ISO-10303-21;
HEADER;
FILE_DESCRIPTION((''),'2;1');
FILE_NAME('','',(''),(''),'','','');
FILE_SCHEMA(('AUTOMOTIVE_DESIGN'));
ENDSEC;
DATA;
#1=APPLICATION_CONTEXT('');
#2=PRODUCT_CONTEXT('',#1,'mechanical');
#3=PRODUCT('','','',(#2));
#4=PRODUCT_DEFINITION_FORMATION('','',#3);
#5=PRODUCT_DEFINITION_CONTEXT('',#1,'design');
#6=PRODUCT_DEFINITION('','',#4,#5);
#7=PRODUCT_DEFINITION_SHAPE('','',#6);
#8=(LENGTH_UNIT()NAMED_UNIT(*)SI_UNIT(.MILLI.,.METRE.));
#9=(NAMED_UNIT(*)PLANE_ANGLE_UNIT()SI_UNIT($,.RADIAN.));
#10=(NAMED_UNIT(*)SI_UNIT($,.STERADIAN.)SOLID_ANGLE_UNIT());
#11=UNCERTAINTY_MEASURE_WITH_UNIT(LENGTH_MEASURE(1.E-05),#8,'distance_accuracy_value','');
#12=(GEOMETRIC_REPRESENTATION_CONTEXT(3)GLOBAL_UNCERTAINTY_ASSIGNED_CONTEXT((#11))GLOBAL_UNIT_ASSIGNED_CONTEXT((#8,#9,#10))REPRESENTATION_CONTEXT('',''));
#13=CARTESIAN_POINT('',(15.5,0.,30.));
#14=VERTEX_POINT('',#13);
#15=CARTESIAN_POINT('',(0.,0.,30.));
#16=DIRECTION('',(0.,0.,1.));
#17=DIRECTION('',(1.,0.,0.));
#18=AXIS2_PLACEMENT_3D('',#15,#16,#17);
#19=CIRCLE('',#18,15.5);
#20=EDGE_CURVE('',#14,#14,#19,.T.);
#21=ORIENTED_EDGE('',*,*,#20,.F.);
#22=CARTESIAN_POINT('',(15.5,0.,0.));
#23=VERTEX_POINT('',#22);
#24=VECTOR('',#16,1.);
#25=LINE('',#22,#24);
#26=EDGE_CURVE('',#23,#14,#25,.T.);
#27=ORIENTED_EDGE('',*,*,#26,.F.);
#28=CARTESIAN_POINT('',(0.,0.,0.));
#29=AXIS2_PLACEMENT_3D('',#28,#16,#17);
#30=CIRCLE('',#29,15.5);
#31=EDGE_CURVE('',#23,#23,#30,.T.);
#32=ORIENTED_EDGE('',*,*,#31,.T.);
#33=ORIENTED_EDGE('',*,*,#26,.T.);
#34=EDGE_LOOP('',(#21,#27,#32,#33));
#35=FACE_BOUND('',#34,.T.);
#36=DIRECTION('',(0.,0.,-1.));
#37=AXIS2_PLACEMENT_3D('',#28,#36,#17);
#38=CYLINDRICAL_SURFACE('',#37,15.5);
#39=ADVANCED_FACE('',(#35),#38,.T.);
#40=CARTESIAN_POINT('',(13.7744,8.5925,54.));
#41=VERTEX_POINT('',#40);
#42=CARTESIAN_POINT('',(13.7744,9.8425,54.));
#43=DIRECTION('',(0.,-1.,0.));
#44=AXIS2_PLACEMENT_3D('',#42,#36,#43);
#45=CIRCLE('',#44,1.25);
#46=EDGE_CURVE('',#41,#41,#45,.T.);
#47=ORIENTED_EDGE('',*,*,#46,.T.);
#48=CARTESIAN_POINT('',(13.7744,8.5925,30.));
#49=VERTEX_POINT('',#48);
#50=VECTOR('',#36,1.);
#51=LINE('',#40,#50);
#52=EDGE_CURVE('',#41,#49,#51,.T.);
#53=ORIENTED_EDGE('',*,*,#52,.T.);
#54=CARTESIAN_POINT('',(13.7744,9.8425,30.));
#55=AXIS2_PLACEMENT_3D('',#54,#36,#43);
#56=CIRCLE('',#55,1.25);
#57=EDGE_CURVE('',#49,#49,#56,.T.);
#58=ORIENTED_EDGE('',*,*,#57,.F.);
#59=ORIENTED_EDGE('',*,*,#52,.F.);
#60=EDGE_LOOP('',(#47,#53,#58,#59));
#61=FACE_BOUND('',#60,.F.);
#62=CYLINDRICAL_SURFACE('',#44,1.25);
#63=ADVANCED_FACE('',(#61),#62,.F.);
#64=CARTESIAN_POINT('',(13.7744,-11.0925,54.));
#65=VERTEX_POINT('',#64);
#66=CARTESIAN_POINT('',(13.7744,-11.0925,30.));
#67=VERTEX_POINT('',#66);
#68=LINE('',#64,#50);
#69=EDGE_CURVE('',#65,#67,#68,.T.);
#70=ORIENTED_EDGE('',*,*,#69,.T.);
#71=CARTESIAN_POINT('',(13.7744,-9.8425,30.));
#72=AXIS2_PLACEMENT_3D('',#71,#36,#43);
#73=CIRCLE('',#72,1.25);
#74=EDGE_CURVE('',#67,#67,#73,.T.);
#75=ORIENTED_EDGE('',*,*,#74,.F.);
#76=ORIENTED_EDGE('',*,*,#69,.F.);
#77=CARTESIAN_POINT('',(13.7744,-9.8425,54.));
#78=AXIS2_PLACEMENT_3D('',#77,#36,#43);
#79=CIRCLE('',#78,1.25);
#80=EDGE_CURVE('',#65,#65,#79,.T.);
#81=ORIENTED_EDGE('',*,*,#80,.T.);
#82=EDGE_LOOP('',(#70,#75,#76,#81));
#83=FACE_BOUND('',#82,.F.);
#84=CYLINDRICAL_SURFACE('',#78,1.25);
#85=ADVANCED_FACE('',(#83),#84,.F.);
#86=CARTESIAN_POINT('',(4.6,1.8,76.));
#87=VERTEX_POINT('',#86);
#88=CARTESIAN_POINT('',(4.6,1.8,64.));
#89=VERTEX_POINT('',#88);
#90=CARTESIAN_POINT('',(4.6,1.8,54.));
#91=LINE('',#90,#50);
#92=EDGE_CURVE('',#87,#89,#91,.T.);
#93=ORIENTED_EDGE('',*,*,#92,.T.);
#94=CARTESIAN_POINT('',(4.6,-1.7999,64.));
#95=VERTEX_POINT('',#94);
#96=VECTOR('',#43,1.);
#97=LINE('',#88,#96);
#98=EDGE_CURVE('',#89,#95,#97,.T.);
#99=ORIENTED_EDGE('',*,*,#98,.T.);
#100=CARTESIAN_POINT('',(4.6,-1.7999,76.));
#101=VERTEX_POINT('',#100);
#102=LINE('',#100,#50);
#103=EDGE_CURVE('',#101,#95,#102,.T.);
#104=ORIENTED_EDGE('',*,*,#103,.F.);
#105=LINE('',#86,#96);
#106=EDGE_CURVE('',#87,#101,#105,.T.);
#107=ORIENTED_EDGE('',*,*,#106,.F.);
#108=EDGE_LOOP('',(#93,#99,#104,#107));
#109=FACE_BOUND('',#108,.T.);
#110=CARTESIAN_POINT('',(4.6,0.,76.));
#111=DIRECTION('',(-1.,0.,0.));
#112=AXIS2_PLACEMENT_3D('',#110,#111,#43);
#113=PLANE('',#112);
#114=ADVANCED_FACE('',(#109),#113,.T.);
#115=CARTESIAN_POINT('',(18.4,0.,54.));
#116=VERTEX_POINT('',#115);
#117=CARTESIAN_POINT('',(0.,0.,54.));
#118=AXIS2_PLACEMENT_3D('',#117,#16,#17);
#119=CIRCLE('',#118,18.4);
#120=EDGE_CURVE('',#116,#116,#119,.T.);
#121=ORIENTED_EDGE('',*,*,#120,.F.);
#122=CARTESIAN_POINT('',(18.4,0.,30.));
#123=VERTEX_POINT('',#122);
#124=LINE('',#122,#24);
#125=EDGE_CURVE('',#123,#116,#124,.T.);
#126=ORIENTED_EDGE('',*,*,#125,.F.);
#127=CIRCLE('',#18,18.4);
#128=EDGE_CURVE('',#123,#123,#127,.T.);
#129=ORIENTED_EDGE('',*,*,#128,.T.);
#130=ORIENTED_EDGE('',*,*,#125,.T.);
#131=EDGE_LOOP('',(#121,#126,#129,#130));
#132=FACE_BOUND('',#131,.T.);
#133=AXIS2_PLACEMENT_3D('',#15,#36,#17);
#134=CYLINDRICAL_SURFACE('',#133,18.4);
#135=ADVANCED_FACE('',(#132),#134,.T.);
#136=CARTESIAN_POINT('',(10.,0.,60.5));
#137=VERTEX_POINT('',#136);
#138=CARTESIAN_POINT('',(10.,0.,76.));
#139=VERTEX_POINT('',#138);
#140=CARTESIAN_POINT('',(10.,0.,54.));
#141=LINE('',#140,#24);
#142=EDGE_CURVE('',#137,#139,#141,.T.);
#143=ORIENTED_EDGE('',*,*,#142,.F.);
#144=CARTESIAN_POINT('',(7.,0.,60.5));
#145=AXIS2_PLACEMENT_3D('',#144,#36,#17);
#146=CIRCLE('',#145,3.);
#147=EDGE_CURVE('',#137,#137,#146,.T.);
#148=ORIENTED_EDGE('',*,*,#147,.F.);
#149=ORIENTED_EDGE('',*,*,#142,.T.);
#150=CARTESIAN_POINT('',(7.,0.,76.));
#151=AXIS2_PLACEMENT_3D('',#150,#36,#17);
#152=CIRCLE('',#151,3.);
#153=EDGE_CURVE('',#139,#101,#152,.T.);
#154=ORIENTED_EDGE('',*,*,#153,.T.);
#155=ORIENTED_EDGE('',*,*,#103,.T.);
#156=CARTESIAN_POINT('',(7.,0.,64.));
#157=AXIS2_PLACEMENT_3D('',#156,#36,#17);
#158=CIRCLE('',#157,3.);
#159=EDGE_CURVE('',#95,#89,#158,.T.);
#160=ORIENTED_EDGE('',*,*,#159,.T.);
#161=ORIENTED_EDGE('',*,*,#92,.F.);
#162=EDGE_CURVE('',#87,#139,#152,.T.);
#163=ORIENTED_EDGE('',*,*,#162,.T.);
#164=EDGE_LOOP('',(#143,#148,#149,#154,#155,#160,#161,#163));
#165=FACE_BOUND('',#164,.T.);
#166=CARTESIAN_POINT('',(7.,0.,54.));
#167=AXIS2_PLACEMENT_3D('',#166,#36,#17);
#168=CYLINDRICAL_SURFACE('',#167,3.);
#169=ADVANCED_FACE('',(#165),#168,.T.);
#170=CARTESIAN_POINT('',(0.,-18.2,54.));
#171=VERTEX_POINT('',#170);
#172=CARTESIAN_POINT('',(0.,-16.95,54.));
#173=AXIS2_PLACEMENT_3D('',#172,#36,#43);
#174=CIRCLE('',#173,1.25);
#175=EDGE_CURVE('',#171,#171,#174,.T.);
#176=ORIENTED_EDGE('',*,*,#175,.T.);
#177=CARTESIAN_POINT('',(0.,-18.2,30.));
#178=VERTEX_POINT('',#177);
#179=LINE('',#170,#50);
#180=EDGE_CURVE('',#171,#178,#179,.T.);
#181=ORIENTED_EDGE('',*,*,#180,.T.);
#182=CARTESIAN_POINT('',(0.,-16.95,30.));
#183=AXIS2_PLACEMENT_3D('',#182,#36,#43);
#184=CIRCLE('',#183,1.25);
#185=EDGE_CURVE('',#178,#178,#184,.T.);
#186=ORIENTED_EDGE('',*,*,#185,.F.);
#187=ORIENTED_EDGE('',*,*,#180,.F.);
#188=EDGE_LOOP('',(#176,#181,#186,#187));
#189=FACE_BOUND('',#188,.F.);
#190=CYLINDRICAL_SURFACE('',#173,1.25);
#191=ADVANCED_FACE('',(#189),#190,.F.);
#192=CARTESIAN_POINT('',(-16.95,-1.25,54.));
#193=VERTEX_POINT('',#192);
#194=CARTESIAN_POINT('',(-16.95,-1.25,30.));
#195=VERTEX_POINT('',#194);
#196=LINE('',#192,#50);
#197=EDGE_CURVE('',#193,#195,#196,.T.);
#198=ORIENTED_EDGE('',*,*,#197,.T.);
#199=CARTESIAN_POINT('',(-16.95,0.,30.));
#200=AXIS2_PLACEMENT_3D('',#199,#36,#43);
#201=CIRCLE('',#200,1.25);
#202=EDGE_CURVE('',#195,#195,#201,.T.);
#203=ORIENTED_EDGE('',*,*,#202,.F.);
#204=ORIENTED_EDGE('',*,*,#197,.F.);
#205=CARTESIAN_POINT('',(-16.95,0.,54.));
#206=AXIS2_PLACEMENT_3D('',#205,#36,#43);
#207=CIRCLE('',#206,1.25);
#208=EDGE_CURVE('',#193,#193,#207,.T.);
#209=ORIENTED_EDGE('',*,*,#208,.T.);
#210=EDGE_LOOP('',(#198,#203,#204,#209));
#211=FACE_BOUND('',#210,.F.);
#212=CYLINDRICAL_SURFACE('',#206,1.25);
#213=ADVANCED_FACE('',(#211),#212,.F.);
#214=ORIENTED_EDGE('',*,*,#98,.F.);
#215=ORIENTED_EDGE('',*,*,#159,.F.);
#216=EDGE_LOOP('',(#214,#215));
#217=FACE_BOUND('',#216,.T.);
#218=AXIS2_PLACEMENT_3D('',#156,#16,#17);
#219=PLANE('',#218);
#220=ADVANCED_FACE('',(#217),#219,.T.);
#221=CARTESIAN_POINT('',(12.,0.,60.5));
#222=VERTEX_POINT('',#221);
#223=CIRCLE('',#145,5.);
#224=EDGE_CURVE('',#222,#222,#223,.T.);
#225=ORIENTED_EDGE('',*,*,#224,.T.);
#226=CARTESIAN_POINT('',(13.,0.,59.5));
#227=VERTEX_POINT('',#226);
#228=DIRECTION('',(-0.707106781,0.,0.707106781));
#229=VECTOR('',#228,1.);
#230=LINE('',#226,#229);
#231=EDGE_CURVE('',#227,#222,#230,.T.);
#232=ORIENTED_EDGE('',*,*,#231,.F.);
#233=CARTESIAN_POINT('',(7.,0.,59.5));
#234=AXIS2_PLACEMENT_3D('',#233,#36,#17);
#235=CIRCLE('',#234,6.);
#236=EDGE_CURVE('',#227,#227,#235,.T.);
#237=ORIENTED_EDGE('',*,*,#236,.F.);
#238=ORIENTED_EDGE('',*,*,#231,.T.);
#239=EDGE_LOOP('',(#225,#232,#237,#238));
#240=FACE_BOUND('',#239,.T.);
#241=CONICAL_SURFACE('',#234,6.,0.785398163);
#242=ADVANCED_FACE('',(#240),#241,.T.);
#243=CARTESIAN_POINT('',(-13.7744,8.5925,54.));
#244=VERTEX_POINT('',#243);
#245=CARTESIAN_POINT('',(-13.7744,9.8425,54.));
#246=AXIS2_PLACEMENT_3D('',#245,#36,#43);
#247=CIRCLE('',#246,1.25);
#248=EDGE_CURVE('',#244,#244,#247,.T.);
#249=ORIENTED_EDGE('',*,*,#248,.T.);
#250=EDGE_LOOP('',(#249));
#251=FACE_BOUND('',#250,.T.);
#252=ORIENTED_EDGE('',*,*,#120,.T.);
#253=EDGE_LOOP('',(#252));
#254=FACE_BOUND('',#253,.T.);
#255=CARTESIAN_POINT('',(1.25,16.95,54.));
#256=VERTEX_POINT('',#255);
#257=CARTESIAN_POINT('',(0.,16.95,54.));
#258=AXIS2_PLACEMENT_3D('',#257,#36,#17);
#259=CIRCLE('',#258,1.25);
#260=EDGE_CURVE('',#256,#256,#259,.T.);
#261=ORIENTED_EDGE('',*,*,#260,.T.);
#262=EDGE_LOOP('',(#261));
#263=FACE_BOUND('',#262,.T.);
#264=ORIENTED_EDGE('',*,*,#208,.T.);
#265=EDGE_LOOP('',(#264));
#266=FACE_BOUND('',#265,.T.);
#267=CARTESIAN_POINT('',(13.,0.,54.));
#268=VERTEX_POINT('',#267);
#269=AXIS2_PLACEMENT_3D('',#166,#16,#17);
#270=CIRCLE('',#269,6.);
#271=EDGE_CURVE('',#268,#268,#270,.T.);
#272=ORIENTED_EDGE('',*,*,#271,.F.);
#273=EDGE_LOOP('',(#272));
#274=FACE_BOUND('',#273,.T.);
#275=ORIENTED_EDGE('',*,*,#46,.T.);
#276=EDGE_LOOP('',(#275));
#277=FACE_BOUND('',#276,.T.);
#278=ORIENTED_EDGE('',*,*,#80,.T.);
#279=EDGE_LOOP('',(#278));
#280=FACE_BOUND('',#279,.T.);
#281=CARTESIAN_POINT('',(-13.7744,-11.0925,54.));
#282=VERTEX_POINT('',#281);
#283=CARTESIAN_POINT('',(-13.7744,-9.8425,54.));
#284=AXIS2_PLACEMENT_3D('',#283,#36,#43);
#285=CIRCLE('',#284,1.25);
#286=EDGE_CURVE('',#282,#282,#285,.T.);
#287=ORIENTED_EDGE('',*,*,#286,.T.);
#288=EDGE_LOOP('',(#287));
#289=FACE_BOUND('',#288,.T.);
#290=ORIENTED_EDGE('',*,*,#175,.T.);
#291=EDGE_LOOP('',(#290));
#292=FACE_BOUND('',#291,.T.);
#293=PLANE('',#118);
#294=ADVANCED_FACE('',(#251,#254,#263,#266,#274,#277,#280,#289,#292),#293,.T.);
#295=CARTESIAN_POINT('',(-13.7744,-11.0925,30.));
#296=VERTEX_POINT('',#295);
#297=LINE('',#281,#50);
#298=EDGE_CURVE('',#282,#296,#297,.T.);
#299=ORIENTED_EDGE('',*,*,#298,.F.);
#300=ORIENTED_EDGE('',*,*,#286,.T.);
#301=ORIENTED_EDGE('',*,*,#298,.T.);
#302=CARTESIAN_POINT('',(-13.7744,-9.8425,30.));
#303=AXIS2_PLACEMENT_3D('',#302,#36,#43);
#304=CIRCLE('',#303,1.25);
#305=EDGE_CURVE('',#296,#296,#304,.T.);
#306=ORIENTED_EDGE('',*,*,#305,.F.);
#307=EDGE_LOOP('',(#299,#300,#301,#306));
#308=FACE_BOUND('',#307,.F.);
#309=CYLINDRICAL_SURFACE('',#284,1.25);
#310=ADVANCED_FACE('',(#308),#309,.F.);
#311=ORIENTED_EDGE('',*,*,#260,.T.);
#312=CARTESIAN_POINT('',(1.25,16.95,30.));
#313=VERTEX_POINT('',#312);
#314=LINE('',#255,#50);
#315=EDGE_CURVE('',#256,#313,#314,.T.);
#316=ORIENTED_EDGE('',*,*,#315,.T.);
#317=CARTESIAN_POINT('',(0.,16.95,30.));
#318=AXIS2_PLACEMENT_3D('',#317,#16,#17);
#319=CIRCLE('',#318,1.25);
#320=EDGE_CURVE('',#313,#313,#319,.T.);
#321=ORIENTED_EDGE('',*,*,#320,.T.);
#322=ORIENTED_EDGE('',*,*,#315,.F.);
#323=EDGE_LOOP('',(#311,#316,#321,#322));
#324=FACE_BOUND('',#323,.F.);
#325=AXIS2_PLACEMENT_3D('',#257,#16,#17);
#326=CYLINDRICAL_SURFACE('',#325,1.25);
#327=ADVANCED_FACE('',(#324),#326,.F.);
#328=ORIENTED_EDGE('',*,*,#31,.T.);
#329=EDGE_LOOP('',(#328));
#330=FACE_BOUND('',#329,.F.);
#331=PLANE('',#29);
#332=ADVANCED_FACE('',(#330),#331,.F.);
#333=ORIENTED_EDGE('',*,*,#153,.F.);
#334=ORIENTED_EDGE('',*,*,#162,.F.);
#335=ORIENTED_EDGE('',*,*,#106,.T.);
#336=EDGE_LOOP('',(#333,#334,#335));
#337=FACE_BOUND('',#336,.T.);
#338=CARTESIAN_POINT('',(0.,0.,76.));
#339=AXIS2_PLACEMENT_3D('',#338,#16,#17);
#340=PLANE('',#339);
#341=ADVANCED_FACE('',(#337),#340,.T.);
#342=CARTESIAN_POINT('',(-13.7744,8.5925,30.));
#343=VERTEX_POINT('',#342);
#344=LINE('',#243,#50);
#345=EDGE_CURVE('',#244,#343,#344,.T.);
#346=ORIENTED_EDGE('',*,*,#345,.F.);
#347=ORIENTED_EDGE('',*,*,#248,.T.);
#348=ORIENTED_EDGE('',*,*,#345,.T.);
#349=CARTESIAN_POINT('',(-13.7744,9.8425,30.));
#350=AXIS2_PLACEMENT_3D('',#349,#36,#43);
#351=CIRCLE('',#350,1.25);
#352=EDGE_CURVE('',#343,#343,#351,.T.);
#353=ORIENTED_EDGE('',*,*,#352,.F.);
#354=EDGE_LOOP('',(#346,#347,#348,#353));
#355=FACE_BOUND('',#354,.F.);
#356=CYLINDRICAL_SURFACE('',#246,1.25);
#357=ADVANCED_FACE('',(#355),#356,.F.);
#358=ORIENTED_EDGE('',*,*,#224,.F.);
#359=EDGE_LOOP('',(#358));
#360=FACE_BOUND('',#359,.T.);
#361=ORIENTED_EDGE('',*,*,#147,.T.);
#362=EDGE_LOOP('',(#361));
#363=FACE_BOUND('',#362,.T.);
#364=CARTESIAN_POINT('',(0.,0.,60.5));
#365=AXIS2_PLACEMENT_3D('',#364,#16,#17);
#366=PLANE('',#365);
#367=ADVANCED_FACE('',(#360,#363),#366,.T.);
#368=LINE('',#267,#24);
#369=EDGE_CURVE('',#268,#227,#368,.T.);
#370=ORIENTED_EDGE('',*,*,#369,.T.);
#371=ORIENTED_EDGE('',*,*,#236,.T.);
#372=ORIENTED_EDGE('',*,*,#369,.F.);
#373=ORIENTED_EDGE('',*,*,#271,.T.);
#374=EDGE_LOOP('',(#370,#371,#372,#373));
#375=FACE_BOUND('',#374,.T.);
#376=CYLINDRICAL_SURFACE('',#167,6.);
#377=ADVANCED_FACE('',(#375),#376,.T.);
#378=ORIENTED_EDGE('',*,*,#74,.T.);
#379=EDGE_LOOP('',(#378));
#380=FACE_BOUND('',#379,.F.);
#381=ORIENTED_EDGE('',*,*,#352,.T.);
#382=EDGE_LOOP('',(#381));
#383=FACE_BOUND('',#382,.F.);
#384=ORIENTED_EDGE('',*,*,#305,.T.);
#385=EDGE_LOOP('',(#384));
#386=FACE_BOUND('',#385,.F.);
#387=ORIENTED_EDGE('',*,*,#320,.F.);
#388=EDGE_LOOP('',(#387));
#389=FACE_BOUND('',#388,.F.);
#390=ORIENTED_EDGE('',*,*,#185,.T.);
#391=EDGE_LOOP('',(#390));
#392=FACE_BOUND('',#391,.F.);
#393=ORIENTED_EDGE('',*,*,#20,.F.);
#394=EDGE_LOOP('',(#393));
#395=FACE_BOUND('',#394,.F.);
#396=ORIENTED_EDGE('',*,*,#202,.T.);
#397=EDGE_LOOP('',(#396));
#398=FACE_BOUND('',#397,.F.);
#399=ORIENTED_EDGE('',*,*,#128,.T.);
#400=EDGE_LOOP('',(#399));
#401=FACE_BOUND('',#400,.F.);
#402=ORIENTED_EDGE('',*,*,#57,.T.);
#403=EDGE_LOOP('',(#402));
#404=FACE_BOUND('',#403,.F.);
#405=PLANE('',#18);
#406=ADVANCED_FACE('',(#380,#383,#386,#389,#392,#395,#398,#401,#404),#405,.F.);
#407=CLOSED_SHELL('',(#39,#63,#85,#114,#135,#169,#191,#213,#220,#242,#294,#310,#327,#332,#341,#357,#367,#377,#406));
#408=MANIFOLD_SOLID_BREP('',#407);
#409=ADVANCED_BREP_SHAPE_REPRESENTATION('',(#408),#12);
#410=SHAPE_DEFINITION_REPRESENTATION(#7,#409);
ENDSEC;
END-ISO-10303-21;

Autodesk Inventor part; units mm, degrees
ref_plane "YZ Plane" through (0, 0, 0) normal (1, 0, 0) x (0, 1, 0)
ref_plane "XZ Plane" through (0, 0, 0) normal (0, 1, 0) x (-1, 0, 0)
ref_plane "XY Plane" through (0, 0, 0) normal (0, 0, 1) x (1, 0, 0)
sketch "Sketch1" plane through (0, 0, 0) normal (0, 0, 1) x (1, 0, 0)
  circle A0 centre (0, 0) radius 15.5
  dimension "d0" = 31
extrude "Extrusion1" add sketch "Sketch1" along normal blind 30
sketch "Sketch2" plane through (0, 0, 30) normal (0, 0, 1) x (1, 0, 0)
  circle A0 centre (0, 0) radius 18.4
  dimension "d3" = 36.8
extrude "Extrusion2" add sketch "Sketch2" along normal blind 24
sketch "Sketch3" plane through (0, 0, 54) normal (0, 0, 1) x (1, 0, 0)
  line L0 (0, 0) -> (7, 0)
  circle A0 centre (7, 0) radius 3
  circle A1 centre (7, 0) radius 6
  dimension "d6" = 7
  dimension "d7" = 6
  dimension "d8" = 12
extrude "Extrusion3" add sketch "Sketch3" along normal blind 22 contours A0
extrude "Extrusion4" add sketch "Sketch3" along normal blind 6.5
chamfer "Chamfer1" distance 1 angle 45 1 edges at (1, 0, 60.5)
sketch "Sketch4" plane through (7, 0, 76) normal (0, 0, 1) x (1, 0, 0)
  point P0 (-7, 0)
sketch "Sketch5" plane through (7, 0, 76) normal (0, 0, 1) x (1, 0, 0)
  line L0 (0, 0) -> (-2.4, 0)
  line L1 (-2.4, 0) -> (-2.4, -1.7999)
  line L2 (-2.4, 0) -> (-2.4, 1.8068)
  arc A0 (-2.4, 1.8068) -> (-2.4, -1.7999) centre (-0.0145, 0.0034) ccw
  point P0 (-7, 0)
  dimension "d16" = 2.4
extrude "Extrusion5" cut sketch "Sketch5" against normal blind 12
sketch "Sketch6" plane through (4.6, -1.7999, 76) normal (-1, 0, 0) x (0, 0, 1)
  line L0 (-11.9968, 1.7999) -> (-7.9968, 1.7999)
  circle A0 centre (-7.9968, 1.7999) radius 0.5
  point P0 (-76, 1.7999)
  dimension "d19" = 4
  dimension "d20" = 1
sketch "Sketch8" plane through (0, 0, 54) normal (0, 0, 1) x (1, 0, 0)
  point P0 (0, 0)
sketch "Sketch9" plane through (0, 0, 54) normal (0, 0, 1) x (1, 0, 0)
  line L0 (0, 0) -> (0, 16.95)
  circle A0 centre (0, 16.95) radius 1.25
  line L1 (0, 0) -> (0, -16.95)
  circle A1 centre (0, -16.95) radius 1.25
  line L2 (0, 0) -> (-16.95, 0)
  circle A2 centre (-16.95, 0) radius 1.25
  line L3 (0, -16.95) -> (-13.7744, -9.8425)
  circle A3 centre (-13.7744, -9.8425) radius 1.25
  circle A4 centre (-13.7744, 9.8425) radius 1.25
  line L4 (0, 16.95) -> (-13.7744, 9.8425)
  line L5 (-13.7744, -9.8425) -> (-13.7744, 9.8425)
  line L6 (0, -16.95) -> (13.7744, -9.8425)
  circle A5 centre (13.7744, -9.8425) radius 1.25
  line L7 (0, 16.95) -> (13.7744, 9.8425)
  circle A6 centre (13.7744, 9.8425) radius 1.25
  line L8 (0, 0) -> (13.7744, 0)
  line L9 (13.7744, 0) -> (13.7744, -9.8425)
  dimension "d49" = 16.95
  dimension "d50" = 2.5
  dimension "d51" = 16.95
  dimension "d52" = 2.5
  dimension "d66" = 16.95
  dimension "d67" = 2.5
  dimension "d68" = 15.5
  dimension "d69" = 2.5
  dimension "d71" = 2.5
  dimension "d72" = 15.5
  dimension "d116" = 2.5
  dimension "d117" = 2.5
hole "Hole2" at (0, -16.95, 54) direction (0, 0, -1) diameter 2.5 end through all
extrude "Extrusion9" cut sketch "Sketch9" against normal through all contours A0 L4 L0 | L0 L7 A0 | L4 A0 L7
thread "Thread5" size "M3x0.5" class "6H" standard "ANSI Metric M Profile" full length
thread "Thread6" size "M3x0.5" class "6H" standard "ANSI Metric M Profile" full length
hole "Hole3" at (-13.7744, -9.8425, 54) direction (0, 0, -1) diameter 2.5 end through all
hole "Hole4" at (-13.7744, 9.8425, 54) direction (0, 0, -1) diameter 2.5 end through all
thread "Thread7" size "M3x0.5" class "6H" standard "ANSI Metric M Profile" full length
thread "Thread8" size "M3x0.5" class "6H" standard "ANSI Metric M Profile" full length
hole "Hole7" at (-16.95, 0, 54) direction (0, 0, -1) diameter 2.5 end through all
thread "Thread9" size "M3x0.5" class "6H" standard "ANSI Metric M Profile" length 10
hole "Hole8" at (13.7744, -9.8425, 54) direction (0, 0, -1) diameter 2.5 end through all
hole "Hole9" at (13.7744, 9.8425, 54) direction (0, 0, -1) diameter 2.5 end through all
thread "Thread10" size "M3x0.5" class "6H" standard "ANSI Metric M Profile" full length
thread "Thread11" size "M2.5x0.45" class "6H" standard "ANSI Metric M Profile" full length
thread "Thread12" size "M3x0.5" class "6H" standard "ANSI Metric M Profile" full length
equation "\"d58\" = Thickness"
equation "\"d78\" = Thickness"
equation "\"d85\" = Thickness"
equation "\"d110\" = Thickness"
equation "\"d123\" = Thickness"
equation "\"d130\" = Thickness"
equation "\"BendRadius\" = Thickness"
equation "\"BendReliefWidth\" = Thickness"
equation "\"BendReliefDepth\" = 0.5 * Thickness"
equation "\"CornerReliefSize\" = 4 * Thickness"
equation "\"MinimumRemnant\" = 2 * Thickness"
equation "\"TransitionRadius\" = BendRadius"
equation "\"JacobiRadiusSize\" = BendRadius"
equation "\"GapSize\" = Thickness"
equation "\"Thickness\" = 0.5"
properties part number "motor_polulu"
